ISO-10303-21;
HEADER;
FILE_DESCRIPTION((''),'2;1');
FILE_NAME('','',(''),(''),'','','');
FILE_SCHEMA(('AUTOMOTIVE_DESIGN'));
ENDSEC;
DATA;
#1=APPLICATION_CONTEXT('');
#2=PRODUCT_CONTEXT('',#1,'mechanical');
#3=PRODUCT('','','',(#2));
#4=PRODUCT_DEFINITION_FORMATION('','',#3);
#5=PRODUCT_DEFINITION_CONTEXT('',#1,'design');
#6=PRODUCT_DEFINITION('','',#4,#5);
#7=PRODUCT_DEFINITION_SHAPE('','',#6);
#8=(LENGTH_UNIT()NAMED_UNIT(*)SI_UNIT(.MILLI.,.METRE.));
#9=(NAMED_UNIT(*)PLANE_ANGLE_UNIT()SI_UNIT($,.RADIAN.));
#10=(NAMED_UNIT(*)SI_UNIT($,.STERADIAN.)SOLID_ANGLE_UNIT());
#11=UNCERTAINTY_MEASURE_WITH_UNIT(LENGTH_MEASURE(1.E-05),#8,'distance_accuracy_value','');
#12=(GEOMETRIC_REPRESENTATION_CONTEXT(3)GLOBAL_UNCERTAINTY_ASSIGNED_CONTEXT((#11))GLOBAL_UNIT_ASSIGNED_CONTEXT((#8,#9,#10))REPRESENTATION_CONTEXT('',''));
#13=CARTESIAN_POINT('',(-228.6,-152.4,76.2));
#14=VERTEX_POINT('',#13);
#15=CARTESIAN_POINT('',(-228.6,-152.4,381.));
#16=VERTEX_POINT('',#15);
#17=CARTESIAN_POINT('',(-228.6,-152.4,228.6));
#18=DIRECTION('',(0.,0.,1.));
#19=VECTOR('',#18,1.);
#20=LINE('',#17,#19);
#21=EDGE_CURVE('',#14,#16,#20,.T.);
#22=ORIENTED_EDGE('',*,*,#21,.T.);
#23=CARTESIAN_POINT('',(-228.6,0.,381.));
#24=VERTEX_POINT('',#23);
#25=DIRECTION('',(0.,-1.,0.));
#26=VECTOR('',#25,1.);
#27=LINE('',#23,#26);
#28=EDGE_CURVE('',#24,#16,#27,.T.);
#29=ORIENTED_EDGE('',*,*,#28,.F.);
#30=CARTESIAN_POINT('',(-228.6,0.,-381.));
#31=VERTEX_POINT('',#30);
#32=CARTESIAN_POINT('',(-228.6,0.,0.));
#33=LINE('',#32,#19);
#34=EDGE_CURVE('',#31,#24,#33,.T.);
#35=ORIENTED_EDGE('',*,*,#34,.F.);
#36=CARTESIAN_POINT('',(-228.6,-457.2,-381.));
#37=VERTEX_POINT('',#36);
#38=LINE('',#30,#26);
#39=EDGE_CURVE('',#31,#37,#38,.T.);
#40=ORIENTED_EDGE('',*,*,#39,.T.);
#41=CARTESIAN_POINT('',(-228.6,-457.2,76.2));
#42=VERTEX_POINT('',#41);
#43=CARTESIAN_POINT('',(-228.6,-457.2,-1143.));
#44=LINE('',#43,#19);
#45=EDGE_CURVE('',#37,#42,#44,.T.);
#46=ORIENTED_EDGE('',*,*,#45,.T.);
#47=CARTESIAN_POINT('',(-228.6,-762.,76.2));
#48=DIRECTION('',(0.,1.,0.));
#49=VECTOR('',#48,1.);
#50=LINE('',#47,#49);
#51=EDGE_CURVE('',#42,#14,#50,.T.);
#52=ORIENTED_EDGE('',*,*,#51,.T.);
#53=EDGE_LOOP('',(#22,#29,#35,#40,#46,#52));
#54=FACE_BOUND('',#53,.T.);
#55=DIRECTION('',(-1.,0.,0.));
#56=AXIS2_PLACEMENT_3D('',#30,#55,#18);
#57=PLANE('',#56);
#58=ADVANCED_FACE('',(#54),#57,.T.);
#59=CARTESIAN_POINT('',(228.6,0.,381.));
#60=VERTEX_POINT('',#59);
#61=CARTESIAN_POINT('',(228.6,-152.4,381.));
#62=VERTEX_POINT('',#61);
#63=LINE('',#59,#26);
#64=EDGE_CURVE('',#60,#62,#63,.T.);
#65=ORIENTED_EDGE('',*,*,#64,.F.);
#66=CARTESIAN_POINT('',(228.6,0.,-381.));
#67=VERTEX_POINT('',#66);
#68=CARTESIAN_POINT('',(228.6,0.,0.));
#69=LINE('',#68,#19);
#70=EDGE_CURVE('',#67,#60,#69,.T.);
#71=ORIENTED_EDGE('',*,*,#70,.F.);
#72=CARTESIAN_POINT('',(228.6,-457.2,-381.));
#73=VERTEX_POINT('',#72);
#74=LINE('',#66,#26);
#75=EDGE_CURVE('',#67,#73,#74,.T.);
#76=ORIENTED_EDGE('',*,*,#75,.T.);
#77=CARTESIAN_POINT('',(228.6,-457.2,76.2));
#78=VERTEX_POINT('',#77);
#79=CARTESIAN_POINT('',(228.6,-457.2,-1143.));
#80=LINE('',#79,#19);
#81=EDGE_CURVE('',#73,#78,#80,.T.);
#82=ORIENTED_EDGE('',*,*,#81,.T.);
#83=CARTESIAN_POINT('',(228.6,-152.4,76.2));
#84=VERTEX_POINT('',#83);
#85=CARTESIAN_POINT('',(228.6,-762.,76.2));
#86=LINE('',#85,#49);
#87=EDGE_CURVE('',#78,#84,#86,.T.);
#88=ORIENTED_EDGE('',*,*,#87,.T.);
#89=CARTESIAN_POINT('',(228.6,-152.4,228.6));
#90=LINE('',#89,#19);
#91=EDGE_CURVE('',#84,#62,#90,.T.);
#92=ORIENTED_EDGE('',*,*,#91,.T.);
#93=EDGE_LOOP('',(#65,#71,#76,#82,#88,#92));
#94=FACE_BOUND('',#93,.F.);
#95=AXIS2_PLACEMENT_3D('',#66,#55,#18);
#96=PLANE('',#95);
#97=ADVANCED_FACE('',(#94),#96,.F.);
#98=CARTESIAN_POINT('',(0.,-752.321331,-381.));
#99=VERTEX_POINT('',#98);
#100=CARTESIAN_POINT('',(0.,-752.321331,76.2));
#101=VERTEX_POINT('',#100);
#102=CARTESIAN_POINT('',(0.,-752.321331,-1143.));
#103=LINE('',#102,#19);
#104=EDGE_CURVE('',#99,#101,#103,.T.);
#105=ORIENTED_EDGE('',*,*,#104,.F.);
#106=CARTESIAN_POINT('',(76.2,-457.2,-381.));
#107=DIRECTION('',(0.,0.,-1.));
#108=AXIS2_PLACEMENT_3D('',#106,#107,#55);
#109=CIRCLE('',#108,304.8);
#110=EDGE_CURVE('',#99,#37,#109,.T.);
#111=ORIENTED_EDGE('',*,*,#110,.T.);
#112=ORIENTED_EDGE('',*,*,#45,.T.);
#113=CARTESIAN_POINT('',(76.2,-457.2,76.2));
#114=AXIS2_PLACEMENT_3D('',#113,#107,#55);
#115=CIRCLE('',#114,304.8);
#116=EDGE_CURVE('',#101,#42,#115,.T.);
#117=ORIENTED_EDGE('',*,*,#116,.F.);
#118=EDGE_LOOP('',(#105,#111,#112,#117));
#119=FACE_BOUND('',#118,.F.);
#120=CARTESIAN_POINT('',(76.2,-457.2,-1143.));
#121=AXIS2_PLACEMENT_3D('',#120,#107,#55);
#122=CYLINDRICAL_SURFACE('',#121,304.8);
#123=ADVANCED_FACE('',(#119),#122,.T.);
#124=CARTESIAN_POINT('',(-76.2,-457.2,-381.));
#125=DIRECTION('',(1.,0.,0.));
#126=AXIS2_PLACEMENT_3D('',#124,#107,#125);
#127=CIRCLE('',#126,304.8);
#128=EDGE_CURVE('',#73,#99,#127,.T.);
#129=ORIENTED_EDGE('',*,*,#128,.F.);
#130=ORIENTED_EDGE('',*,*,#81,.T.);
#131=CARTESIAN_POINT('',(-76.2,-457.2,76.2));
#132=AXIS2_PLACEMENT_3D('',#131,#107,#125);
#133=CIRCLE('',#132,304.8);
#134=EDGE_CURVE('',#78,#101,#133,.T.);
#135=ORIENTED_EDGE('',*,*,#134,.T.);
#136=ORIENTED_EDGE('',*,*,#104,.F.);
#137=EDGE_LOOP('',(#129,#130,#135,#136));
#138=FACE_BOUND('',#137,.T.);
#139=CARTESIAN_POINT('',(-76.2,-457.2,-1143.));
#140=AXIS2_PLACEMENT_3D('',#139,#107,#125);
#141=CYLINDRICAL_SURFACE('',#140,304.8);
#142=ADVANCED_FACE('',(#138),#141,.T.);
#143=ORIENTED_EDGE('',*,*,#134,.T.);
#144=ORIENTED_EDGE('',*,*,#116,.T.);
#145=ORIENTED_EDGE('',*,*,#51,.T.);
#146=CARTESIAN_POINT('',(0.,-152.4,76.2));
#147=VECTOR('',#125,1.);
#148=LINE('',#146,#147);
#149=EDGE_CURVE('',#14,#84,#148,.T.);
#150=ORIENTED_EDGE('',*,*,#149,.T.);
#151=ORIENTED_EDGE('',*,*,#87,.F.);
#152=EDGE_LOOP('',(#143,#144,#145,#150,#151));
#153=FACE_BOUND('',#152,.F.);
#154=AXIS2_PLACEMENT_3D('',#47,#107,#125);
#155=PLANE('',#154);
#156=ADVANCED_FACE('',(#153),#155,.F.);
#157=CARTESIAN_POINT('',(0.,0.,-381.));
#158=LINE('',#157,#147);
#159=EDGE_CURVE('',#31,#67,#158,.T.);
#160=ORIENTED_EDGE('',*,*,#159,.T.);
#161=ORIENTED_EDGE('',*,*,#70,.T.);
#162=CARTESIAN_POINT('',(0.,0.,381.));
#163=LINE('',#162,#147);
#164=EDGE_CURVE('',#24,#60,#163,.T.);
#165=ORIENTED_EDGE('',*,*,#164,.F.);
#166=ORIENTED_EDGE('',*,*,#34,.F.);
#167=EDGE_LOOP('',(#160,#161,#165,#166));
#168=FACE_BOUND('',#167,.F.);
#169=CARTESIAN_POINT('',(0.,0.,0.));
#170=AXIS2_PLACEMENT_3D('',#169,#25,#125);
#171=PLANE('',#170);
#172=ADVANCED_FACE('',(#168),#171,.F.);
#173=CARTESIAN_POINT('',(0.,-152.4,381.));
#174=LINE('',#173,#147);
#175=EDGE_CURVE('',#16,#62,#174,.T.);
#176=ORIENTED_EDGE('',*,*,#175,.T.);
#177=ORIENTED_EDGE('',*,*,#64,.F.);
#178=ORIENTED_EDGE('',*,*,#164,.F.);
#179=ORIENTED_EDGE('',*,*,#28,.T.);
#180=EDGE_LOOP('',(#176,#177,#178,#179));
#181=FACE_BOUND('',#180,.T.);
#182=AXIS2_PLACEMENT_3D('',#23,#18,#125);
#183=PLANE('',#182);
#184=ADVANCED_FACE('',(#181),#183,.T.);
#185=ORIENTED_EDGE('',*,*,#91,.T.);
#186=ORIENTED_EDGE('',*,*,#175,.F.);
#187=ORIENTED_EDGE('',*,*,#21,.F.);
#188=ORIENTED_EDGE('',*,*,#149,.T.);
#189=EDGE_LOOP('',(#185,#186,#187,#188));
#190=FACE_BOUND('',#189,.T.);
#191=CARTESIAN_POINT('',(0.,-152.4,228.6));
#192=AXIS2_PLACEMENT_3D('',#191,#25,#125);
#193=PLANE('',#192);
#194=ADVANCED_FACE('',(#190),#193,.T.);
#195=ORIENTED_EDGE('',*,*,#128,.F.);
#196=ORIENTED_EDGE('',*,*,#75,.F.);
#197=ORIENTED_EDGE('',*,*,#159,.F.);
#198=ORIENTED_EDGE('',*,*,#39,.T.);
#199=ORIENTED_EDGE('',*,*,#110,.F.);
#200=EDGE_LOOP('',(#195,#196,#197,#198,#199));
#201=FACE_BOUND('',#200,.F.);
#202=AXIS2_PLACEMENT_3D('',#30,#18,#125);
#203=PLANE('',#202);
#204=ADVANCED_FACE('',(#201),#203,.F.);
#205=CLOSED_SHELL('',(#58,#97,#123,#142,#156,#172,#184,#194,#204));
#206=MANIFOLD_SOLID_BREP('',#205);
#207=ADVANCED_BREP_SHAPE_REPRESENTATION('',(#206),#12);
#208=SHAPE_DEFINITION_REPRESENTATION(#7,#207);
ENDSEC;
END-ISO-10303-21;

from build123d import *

# Parameters (mm, degrees)
F0_W        = 457.2
F0_H        = 762
F1_DEPTH    = 762
F2_W        = 457.2
F2_H        = 304.8
F3_DEPTH    = 609.6
F4_T1_DEPTH = 1981.2


# Not quite as in the source:
# - a fillet or chamfer that OpenCascade refuses, or shapes differently, is made with other operations: its cross-section is extruded or revolved along the edge and cut away or added


with BuildPart() as f1:
    # F0 (on Front) → F1 (new body)
    with BuildSketch(Plane.XZ):
        Rectangle(F0_W, F0_H)
    extrude(amount=F1_DEPTH)

    # F2 (on face) → F3 (cut)
    with BuildSketch(Plane.XZ.offset(762)):
        with Locations((0, 228.6)):
            Rectangle(F2_W, F2_H)
    extrude(amount=-F3_DEPTH, mode=Mode.SUBTRACT)

    # F4: fillet of radius 304.8 on 2 edges, made by hand

    # F4_s2 → F4_t1 (cut)
    with BuildSketch(Plane.XY.offset(-1143)):
        with BuildLine():
            ThreePointArc((-228.6, -457.2), (-139.3261469057, -672.7261469057), (76.2, -762))
            Line((76.2, -762), (-228.6, -762))
            Line((-228.6, -762), (-228.6, -457.2))
        make_face()
        with BuildLine():
            ThreePointArc((228.6, -457.2), (139.3261469057, -672.7261469057), (-76.2, -762))
            Line((-76.2, -762), (228.6, -762))
            Line((228.6, -762), (228.6, -457.2))
        make_face()
    extrude(amount=F4_T1_DEPTH, mode=Mode.SUBTRACT)


solid = f1.part
